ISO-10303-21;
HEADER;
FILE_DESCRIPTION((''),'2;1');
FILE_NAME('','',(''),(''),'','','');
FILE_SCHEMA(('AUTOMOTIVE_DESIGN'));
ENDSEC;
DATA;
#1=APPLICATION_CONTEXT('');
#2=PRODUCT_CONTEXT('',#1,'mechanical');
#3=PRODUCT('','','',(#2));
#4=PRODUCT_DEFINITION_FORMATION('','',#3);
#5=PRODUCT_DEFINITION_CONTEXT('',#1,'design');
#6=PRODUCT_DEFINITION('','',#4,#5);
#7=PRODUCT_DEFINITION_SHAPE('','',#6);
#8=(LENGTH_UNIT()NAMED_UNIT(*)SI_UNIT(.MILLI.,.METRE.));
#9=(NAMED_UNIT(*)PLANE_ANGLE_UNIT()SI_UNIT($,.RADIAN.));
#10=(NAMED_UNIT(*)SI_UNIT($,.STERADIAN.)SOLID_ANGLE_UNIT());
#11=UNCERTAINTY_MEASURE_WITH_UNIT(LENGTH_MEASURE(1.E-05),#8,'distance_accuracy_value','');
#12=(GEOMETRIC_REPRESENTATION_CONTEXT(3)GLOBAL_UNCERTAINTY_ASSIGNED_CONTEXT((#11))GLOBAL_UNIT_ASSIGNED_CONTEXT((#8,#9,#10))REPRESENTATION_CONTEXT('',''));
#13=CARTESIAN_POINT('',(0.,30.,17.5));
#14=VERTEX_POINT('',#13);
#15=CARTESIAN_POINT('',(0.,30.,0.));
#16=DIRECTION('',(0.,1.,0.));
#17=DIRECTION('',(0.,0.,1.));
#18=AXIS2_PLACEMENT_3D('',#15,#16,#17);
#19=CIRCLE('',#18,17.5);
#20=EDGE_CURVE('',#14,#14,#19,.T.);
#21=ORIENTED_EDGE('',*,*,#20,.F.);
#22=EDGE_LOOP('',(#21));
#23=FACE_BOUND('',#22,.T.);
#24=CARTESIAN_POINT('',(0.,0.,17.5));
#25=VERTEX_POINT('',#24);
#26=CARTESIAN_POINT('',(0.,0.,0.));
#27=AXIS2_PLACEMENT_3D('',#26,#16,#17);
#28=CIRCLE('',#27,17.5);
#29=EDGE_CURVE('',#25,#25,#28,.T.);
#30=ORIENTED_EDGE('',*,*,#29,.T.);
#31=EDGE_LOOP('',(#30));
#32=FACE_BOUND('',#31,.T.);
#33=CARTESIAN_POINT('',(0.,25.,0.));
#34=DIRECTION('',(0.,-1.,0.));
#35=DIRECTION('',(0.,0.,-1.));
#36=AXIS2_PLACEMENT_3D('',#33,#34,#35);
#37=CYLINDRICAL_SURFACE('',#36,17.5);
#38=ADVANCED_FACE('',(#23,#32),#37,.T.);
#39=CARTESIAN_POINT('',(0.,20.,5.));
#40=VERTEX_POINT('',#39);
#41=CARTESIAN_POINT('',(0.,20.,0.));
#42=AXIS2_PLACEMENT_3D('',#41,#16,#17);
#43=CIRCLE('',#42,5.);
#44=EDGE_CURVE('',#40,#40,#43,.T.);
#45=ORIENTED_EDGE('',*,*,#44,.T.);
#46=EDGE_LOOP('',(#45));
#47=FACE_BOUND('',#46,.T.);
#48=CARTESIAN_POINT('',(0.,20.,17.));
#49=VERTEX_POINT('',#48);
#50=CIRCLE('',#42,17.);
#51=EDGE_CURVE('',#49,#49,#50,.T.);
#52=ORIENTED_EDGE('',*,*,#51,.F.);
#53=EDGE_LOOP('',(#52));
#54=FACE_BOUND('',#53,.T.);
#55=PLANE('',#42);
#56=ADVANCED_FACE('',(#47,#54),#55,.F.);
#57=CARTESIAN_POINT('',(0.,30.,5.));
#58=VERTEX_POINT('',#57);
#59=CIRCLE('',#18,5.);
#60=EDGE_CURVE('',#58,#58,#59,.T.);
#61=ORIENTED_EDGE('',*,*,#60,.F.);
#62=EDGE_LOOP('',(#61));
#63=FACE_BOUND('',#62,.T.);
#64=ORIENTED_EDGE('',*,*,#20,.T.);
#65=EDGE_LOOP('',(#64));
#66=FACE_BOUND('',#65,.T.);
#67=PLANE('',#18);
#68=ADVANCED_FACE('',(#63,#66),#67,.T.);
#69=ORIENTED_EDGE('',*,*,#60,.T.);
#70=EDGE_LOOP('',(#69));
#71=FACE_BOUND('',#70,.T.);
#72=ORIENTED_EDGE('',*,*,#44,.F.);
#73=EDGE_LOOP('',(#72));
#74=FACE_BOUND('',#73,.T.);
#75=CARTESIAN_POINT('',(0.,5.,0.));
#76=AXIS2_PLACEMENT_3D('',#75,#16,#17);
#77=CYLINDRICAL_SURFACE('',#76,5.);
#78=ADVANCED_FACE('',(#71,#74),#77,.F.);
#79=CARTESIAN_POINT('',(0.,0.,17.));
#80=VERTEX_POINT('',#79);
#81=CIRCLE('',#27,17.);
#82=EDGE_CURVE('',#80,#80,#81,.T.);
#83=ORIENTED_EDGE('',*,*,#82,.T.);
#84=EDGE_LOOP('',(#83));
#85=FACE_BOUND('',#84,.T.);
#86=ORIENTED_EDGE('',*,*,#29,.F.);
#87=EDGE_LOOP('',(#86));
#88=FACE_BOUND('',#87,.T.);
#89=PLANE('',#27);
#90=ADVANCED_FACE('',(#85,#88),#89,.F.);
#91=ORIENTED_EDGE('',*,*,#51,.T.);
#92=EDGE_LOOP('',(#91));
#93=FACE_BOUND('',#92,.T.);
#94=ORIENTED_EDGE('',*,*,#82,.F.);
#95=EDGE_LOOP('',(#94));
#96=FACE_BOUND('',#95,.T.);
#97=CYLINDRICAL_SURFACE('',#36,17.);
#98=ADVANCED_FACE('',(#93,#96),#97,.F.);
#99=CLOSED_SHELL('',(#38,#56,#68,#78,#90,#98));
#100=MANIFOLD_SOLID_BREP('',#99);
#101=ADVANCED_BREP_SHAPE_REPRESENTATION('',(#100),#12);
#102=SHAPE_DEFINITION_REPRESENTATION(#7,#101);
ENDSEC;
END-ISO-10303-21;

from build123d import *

# Parameters (mm, degrees)
IZIM1_R                     = 17.5
IZIM1_R_2                   = 17
Y_KSEKLIK_EKSTR_ZYON1_DEPTH = 25
KAL_NLA_T_R2_START          = 20
KAL_NLA_T_R2_OUTLINE_R      = 17.5
KAL_NLA_T_R2_DEPTH          = 10
IZIM5_R                     = 5
KES_EKSTR_ZYON4_DEPTH       = 25


# Read off the part's stored shape, not the designer's step: Kalınlaştır2
with BuildPart() as part:
    # Çizim1 → Yükseklik-Ekstrüzyon1 (new body)
    with BuildSketch(Plane(origin=(0, 0, 0), x_dir=(1, 0, 0), z_dir=(0, 1, 0))):
        with Locations(Location((0, 0, 0), (0, 0, 270))):
            Circle(IZIM1_R)
        with Locations(Location((0, 0, 0), (0, 0, 270))):
            Circle(IZIM1_R_2, mode=Mode.SUBTRACT)
    extrude(amount=Y_KSEKLIK_EKSTR_ZYON1_DEPTH)

    # Kalınlaştır2 outline → Kalınlaştır2 (add)
    with BuildSketch(Plane(origin=(0, 0, 0), x_dir=(1, 0, 0), z_dir=(0, 1, 0)).offset(KAL_NLA_T_R2_START)):
        Circle(KAL_NLA_T_R2_OUTLINE_R)
    extrude(amount=KAL_NLA_T_R2_DEPTH)

    # Çizim5 → Kes-Ekstrüzyon4 (cut)
    with BuildSketch(Plane(origin=(0, 30, 0), x_dir=(1, 0, 0), z_dir=(0, 1, 0))):
        with Locations(Location((0, 0, 0), (0, 0, 270))):
            Circle(IZIM5_R)
    extrude(amount=-KES_EKSTR_ZYON4_DEPTH, mode=Mode.SUBTRACT)


solid = part.part
